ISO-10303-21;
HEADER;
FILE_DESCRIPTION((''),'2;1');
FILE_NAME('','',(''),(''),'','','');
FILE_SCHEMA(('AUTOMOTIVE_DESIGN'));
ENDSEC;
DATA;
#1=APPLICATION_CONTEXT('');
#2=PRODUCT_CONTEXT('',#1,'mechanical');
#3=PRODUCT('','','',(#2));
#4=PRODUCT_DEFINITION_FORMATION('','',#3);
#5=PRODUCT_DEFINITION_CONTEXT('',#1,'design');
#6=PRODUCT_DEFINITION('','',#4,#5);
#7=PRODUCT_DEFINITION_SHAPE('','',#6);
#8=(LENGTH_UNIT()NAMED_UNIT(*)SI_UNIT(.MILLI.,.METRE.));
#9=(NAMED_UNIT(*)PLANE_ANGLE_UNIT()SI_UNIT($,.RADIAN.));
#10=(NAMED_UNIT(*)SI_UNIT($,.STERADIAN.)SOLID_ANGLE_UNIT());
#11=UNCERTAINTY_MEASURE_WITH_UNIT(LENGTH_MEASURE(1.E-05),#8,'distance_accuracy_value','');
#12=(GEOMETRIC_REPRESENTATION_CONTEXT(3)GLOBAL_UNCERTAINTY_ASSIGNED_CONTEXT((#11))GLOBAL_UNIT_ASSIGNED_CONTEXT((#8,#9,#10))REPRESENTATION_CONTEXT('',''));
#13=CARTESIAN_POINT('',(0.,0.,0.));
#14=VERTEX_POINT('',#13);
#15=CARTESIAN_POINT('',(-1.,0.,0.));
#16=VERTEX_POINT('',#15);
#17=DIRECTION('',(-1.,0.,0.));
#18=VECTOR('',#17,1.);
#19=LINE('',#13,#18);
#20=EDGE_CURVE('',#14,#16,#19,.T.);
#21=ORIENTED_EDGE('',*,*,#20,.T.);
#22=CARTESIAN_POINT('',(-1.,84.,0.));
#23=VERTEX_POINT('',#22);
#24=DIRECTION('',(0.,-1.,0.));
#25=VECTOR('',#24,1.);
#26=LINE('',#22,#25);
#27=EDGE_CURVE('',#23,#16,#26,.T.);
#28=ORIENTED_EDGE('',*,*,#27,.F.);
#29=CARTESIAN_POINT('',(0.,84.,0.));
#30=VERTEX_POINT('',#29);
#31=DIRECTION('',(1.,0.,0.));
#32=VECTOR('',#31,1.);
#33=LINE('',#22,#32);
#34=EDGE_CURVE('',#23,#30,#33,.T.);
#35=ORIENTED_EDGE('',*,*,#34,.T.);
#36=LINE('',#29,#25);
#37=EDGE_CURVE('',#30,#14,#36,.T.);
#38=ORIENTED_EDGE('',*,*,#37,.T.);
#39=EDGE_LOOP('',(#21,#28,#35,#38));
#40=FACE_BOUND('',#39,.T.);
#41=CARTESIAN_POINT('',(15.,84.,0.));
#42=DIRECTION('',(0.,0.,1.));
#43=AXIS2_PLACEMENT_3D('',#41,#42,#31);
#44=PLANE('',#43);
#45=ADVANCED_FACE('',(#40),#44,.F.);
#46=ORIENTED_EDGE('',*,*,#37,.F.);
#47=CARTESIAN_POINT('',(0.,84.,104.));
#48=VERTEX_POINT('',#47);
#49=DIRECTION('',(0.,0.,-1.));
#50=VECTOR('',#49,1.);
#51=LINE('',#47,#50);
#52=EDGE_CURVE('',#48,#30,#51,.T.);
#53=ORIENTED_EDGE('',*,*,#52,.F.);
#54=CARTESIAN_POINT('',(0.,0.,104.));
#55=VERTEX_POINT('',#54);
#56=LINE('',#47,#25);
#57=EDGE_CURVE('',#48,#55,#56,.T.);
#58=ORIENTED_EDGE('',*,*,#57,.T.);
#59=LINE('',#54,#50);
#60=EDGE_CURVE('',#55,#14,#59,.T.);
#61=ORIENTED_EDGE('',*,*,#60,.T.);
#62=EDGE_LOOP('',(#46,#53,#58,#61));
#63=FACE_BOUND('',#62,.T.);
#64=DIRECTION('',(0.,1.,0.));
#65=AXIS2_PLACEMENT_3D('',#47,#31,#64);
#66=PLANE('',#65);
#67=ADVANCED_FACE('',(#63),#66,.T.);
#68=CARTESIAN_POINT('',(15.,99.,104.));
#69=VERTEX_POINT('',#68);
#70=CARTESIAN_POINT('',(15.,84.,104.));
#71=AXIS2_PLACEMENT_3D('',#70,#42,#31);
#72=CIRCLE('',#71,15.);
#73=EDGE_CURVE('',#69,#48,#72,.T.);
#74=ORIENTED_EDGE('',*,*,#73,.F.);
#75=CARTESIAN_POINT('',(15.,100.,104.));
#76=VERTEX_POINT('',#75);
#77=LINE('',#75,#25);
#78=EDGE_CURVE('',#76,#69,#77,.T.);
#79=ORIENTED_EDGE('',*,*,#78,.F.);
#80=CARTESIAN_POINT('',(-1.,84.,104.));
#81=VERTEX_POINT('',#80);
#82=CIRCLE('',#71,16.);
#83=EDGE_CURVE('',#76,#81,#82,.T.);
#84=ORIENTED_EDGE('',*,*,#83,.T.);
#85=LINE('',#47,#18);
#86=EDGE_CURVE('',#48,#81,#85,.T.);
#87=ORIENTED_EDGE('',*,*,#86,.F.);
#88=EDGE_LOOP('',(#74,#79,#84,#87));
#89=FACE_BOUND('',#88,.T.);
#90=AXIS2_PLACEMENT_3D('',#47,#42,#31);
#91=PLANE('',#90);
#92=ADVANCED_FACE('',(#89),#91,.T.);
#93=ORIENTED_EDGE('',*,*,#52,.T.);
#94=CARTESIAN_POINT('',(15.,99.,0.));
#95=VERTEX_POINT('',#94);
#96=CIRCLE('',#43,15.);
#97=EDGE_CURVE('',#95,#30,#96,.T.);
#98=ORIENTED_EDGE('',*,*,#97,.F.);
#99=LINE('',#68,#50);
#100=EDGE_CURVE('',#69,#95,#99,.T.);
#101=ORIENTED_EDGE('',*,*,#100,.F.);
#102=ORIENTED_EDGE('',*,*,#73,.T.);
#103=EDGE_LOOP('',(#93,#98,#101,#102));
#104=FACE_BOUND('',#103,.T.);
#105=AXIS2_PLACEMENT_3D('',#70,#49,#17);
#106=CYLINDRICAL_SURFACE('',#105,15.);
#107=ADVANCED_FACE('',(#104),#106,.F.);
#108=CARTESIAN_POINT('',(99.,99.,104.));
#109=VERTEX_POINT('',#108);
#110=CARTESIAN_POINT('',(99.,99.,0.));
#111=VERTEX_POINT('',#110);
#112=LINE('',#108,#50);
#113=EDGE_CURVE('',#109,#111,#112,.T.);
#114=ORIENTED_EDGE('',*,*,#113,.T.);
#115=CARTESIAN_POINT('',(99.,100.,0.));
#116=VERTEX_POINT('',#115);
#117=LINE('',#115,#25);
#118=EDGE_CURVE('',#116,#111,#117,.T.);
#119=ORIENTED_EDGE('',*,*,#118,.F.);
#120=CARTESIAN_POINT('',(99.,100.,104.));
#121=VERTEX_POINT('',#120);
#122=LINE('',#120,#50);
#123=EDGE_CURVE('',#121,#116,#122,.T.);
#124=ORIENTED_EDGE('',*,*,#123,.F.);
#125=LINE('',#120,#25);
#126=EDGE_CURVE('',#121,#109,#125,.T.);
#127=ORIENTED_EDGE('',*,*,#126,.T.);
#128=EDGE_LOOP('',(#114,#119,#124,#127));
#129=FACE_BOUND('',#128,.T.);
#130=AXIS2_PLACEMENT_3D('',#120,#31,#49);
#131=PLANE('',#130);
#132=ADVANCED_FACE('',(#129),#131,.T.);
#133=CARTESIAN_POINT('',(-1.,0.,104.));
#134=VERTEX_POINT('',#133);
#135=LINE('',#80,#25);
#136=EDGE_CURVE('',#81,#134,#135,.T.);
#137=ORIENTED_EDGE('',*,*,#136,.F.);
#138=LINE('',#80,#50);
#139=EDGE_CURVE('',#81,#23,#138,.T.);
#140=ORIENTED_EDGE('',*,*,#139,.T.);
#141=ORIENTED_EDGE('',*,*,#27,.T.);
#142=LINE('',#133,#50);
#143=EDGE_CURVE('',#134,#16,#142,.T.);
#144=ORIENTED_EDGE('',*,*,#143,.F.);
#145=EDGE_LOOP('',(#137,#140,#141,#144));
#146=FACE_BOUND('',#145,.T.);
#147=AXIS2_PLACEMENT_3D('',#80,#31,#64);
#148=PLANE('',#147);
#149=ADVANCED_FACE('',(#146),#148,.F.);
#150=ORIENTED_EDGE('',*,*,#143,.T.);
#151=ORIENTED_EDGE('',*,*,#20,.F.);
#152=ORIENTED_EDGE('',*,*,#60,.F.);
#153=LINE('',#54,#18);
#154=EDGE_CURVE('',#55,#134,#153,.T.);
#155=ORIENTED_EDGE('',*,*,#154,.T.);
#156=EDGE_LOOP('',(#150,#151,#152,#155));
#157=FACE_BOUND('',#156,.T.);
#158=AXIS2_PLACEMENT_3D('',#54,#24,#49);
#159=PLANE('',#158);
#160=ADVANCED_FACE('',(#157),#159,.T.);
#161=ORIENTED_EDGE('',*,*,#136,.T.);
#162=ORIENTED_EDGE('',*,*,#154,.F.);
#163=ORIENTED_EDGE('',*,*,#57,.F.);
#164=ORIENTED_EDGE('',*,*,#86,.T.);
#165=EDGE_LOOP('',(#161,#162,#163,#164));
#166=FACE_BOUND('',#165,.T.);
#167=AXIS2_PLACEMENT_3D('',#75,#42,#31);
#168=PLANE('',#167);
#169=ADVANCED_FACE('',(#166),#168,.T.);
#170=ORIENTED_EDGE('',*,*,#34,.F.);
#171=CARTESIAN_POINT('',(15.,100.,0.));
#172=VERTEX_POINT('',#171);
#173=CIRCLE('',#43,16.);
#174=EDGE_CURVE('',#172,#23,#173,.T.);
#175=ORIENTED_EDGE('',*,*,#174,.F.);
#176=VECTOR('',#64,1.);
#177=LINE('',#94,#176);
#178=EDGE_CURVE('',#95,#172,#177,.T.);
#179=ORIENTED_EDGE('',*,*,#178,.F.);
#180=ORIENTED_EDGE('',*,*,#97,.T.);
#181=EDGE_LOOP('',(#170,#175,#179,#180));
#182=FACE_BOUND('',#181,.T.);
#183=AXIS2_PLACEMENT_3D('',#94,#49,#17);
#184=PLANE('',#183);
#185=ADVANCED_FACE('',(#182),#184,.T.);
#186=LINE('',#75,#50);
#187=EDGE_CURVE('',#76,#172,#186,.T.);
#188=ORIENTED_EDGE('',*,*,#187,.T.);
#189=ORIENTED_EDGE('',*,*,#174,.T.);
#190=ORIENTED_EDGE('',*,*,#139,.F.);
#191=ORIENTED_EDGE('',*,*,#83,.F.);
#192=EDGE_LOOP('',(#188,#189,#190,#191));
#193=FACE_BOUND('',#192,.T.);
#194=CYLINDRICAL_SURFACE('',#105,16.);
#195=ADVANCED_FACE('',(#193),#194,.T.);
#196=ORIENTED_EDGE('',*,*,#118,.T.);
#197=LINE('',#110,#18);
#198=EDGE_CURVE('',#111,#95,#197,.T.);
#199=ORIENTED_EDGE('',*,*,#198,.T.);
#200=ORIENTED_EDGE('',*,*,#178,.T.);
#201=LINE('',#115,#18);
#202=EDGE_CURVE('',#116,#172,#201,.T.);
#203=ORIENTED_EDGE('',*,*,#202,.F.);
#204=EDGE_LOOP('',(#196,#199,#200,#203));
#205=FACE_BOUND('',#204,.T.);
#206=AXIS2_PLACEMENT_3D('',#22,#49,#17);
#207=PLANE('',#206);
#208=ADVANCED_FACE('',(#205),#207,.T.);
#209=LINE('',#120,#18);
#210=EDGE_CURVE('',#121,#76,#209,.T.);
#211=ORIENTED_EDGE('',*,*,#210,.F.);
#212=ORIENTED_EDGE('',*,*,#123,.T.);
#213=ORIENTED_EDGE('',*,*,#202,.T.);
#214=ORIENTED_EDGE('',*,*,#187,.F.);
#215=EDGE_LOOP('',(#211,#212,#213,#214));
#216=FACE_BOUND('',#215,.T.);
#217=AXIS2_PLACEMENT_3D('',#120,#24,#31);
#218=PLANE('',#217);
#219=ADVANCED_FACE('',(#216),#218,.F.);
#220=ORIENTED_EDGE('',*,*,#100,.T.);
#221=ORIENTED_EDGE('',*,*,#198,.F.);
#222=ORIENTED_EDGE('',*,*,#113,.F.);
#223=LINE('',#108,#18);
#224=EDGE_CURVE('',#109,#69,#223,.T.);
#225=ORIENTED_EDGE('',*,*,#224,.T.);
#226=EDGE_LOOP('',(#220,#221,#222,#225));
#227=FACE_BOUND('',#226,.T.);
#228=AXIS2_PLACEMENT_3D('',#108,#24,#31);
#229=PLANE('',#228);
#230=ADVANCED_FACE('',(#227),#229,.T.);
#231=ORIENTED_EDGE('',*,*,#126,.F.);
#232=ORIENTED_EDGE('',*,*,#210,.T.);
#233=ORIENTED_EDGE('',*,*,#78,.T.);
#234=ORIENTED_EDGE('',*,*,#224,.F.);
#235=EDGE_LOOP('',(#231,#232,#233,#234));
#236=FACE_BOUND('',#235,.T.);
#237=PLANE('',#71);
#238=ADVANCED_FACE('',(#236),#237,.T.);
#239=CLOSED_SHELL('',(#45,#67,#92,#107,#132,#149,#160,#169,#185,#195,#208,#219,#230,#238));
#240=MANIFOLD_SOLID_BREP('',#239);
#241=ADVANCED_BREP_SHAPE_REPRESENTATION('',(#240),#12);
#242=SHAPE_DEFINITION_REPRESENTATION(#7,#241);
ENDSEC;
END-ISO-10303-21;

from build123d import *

# Parameters (mm, degrees)
BASE_FLANGE1_DEPTH = 104


# Sheet-metal steps are written as plain solids
with BuildPart() as part:
    # Sketch1 → Base-Flange1 (new body)
    with BuildSketch(Plane.XY):
        with BuildLine():
            Line((99, 99), (15, 99))
            ThreePointArc((15, 99), (4.393398282, 94.606601718), (0, 84))
            Line((0, 84), (0, 0))
            Line((0, 0), (-1, 0))
            Line((-1, 0), (-1, 84))
            ThreePointArc((-1, 84), (3.686291501, 95.313708499), (15, 100))
            Line((15, 100), (99, 100))
            Line((99, 100), (99, 99))
        make_face()
    extrude(amount=BASE_FLANGE1_DEPTH)


solid = part.part
